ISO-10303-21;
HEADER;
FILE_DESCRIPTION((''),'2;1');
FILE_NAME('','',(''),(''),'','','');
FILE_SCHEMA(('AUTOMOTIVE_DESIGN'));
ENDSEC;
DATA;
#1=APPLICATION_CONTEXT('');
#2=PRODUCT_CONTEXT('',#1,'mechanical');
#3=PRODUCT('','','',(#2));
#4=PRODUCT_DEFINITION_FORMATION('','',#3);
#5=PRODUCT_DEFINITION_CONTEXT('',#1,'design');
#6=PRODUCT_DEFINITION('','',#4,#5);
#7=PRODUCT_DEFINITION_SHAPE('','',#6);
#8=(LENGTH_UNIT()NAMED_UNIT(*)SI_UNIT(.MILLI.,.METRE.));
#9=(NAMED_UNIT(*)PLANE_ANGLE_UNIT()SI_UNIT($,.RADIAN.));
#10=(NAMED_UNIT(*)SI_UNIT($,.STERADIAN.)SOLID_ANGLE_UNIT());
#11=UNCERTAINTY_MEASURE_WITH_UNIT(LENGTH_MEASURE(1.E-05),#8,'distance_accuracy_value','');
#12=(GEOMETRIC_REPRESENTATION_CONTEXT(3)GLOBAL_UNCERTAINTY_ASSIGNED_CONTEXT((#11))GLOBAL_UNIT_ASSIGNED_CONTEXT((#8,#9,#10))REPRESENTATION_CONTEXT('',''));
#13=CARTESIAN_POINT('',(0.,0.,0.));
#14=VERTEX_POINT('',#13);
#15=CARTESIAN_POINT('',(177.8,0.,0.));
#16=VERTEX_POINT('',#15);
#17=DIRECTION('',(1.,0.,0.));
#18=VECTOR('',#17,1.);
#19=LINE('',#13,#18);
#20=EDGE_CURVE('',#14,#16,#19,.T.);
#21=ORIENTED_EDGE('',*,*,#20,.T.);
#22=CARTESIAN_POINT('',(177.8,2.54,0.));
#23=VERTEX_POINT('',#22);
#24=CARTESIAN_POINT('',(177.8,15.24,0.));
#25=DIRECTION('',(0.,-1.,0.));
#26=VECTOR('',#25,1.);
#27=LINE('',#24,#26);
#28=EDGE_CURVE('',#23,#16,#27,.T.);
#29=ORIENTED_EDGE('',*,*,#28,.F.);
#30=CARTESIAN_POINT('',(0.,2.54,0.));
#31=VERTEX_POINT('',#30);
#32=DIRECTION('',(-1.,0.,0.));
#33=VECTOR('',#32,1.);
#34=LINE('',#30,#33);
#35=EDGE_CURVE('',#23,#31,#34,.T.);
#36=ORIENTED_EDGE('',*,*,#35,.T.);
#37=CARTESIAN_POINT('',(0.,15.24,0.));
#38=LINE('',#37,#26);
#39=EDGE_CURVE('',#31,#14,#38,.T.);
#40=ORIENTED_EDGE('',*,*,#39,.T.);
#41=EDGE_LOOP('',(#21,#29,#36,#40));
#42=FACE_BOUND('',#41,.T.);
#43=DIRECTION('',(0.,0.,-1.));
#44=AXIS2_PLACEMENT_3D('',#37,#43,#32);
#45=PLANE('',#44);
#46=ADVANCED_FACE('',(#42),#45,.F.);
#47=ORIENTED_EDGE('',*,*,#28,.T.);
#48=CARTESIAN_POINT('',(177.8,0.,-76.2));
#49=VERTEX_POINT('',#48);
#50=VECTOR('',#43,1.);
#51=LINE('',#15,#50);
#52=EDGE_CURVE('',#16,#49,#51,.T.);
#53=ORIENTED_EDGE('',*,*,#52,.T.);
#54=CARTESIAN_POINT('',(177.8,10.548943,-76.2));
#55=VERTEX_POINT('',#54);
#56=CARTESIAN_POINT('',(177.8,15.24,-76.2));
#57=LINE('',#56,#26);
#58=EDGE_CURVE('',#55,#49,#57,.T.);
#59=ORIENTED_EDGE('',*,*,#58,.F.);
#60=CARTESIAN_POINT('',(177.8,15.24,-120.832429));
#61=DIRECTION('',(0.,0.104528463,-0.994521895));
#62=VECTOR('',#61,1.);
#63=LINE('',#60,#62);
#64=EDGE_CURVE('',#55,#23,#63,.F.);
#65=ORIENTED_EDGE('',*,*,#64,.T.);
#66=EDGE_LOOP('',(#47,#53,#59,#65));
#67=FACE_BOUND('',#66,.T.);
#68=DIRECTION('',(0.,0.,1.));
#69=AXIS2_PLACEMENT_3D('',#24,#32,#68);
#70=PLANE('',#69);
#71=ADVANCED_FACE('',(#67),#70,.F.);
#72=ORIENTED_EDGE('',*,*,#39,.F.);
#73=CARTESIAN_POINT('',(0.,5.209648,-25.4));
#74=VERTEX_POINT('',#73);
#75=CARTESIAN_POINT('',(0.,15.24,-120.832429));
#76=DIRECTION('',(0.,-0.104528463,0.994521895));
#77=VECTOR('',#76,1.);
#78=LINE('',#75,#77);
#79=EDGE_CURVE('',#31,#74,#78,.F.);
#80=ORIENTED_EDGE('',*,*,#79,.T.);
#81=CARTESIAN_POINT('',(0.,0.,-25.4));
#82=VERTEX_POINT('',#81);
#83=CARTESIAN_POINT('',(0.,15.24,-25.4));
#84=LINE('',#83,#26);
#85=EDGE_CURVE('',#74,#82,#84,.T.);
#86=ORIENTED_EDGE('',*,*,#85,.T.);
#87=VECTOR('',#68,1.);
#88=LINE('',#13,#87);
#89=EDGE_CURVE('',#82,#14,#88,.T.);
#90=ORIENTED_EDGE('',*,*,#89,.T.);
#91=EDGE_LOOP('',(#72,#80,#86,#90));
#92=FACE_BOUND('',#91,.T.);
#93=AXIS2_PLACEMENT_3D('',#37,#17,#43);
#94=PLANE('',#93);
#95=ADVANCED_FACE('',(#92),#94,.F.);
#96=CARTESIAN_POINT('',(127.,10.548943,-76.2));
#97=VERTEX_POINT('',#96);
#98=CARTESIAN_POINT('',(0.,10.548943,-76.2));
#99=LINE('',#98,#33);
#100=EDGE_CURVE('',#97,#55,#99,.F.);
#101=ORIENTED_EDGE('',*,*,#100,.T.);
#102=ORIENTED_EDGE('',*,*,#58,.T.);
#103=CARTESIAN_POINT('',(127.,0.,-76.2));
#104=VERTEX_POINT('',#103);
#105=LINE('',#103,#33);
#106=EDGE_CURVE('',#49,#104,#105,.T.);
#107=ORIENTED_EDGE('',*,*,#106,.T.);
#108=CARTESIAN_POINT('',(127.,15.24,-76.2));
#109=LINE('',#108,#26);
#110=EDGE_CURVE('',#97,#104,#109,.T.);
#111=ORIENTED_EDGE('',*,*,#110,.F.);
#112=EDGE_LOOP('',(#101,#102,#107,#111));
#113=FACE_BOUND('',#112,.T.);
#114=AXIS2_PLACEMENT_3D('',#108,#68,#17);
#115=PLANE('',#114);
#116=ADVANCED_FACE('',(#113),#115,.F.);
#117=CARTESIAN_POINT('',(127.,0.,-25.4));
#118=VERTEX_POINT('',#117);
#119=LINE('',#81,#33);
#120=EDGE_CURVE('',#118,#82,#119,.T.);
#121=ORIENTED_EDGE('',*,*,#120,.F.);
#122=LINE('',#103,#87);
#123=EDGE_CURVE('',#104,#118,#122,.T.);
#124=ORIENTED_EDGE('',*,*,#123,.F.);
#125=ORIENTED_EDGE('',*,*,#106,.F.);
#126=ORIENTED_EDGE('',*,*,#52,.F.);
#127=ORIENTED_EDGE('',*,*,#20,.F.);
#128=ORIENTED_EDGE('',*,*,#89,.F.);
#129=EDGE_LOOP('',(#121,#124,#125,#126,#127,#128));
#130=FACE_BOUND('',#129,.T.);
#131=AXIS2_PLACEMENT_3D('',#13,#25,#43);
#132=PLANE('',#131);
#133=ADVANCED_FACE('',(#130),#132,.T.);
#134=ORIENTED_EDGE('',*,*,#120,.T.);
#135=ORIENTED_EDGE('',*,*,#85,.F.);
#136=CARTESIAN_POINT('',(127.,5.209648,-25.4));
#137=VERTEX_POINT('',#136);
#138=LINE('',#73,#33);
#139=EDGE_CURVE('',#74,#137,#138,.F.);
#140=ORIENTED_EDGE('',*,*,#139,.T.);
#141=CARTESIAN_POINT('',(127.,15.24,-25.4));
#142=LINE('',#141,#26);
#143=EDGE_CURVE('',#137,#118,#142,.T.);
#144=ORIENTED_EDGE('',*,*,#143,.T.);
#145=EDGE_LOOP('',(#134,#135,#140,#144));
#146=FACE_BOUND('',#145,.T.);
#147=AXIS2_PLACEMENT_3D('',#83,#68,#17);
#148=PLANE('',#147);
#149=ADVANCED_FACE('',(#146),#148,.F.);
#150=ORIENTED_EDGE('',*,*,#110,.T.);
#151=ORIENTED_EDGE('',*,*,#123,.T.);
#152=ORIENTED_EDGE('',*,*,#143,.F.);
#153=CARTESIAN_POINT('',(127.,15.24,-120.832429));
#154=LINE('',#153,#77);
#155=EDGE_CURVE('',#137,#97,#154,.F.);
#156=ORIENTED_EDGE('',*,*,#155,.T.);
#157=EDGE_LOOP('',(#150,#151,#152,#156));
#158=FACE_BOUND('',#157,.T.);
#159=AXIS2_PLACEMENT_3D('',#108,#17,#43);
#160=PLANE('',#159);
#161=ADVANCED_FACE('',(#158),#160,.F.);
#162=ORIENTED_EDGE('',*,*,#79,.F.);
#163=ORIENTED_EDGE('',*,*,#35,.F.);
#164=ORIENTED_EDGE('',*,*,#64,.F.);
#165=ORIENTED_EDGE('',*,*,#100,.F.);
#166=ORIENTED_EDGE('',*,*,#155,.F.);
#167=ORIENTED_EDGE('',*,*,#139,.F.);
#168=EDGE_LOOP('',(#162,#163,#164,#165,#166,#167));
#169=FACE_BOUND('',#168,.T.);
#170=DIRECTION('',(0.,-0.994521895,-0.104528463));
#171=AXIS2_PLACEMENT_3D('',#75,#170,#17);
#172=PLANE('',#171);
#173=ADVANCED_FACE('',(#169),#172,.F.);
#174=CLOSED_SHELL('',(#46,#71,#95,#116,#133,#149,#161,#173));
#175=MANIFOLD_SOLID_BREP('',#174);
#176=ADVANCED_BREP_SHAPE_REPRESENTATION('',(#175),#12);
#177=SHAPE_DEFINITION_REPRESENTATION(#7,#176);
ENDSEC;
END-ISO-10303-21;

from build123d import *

# Parameters (mm, degrees)
BOSS_EXTRUDE1_DEPTH = 15.24
CHAMFER1_SIZE       = 12.7
CHAMFER1_SIZE_2     = 120.832428569


with BuildPart() as part:
    # Sketch1 → Boss-Extrude1 (new body)
    with BuildSketch(Plane(origin=(0, 0, 0), x_dir=(1, 0, 0), z_dir=(0, 1, 0))):
        Polygon((0, 0), (177.8, 0), (177.8, 76.2), (127, 76.2), (127, 25.4), (0, 25.4), align=None)
    extrude(amount=BOSS_EXTRUDE1_DEPTH)

    # Chamfer1
    # the kernel refuses this chamfer: 120.832428569, 12.7 mm, written as the material it takes off along each edge
    with BuildSketch(Plane(origin=(-314.100660456, 15.24, 0), x_dir=(0, -0.9396808679591153, 0.34205243222582665), z_dir=(1, 0, 0))) as chamfer1_piece_1:
        Polygon((CHAMFER1_SIZE * 0.939680867959, CHAMFER1_SIZE * 0.342052432226), (-CHAMFER1_SIZE_2 * 0.342052432225, CHAMFER1_SIZE_2 * 0.939680867956), (0, 0), align=None)
    extrude(amount=806.001320912, mode=Mode.SUBTRACT)


solid = part.part
